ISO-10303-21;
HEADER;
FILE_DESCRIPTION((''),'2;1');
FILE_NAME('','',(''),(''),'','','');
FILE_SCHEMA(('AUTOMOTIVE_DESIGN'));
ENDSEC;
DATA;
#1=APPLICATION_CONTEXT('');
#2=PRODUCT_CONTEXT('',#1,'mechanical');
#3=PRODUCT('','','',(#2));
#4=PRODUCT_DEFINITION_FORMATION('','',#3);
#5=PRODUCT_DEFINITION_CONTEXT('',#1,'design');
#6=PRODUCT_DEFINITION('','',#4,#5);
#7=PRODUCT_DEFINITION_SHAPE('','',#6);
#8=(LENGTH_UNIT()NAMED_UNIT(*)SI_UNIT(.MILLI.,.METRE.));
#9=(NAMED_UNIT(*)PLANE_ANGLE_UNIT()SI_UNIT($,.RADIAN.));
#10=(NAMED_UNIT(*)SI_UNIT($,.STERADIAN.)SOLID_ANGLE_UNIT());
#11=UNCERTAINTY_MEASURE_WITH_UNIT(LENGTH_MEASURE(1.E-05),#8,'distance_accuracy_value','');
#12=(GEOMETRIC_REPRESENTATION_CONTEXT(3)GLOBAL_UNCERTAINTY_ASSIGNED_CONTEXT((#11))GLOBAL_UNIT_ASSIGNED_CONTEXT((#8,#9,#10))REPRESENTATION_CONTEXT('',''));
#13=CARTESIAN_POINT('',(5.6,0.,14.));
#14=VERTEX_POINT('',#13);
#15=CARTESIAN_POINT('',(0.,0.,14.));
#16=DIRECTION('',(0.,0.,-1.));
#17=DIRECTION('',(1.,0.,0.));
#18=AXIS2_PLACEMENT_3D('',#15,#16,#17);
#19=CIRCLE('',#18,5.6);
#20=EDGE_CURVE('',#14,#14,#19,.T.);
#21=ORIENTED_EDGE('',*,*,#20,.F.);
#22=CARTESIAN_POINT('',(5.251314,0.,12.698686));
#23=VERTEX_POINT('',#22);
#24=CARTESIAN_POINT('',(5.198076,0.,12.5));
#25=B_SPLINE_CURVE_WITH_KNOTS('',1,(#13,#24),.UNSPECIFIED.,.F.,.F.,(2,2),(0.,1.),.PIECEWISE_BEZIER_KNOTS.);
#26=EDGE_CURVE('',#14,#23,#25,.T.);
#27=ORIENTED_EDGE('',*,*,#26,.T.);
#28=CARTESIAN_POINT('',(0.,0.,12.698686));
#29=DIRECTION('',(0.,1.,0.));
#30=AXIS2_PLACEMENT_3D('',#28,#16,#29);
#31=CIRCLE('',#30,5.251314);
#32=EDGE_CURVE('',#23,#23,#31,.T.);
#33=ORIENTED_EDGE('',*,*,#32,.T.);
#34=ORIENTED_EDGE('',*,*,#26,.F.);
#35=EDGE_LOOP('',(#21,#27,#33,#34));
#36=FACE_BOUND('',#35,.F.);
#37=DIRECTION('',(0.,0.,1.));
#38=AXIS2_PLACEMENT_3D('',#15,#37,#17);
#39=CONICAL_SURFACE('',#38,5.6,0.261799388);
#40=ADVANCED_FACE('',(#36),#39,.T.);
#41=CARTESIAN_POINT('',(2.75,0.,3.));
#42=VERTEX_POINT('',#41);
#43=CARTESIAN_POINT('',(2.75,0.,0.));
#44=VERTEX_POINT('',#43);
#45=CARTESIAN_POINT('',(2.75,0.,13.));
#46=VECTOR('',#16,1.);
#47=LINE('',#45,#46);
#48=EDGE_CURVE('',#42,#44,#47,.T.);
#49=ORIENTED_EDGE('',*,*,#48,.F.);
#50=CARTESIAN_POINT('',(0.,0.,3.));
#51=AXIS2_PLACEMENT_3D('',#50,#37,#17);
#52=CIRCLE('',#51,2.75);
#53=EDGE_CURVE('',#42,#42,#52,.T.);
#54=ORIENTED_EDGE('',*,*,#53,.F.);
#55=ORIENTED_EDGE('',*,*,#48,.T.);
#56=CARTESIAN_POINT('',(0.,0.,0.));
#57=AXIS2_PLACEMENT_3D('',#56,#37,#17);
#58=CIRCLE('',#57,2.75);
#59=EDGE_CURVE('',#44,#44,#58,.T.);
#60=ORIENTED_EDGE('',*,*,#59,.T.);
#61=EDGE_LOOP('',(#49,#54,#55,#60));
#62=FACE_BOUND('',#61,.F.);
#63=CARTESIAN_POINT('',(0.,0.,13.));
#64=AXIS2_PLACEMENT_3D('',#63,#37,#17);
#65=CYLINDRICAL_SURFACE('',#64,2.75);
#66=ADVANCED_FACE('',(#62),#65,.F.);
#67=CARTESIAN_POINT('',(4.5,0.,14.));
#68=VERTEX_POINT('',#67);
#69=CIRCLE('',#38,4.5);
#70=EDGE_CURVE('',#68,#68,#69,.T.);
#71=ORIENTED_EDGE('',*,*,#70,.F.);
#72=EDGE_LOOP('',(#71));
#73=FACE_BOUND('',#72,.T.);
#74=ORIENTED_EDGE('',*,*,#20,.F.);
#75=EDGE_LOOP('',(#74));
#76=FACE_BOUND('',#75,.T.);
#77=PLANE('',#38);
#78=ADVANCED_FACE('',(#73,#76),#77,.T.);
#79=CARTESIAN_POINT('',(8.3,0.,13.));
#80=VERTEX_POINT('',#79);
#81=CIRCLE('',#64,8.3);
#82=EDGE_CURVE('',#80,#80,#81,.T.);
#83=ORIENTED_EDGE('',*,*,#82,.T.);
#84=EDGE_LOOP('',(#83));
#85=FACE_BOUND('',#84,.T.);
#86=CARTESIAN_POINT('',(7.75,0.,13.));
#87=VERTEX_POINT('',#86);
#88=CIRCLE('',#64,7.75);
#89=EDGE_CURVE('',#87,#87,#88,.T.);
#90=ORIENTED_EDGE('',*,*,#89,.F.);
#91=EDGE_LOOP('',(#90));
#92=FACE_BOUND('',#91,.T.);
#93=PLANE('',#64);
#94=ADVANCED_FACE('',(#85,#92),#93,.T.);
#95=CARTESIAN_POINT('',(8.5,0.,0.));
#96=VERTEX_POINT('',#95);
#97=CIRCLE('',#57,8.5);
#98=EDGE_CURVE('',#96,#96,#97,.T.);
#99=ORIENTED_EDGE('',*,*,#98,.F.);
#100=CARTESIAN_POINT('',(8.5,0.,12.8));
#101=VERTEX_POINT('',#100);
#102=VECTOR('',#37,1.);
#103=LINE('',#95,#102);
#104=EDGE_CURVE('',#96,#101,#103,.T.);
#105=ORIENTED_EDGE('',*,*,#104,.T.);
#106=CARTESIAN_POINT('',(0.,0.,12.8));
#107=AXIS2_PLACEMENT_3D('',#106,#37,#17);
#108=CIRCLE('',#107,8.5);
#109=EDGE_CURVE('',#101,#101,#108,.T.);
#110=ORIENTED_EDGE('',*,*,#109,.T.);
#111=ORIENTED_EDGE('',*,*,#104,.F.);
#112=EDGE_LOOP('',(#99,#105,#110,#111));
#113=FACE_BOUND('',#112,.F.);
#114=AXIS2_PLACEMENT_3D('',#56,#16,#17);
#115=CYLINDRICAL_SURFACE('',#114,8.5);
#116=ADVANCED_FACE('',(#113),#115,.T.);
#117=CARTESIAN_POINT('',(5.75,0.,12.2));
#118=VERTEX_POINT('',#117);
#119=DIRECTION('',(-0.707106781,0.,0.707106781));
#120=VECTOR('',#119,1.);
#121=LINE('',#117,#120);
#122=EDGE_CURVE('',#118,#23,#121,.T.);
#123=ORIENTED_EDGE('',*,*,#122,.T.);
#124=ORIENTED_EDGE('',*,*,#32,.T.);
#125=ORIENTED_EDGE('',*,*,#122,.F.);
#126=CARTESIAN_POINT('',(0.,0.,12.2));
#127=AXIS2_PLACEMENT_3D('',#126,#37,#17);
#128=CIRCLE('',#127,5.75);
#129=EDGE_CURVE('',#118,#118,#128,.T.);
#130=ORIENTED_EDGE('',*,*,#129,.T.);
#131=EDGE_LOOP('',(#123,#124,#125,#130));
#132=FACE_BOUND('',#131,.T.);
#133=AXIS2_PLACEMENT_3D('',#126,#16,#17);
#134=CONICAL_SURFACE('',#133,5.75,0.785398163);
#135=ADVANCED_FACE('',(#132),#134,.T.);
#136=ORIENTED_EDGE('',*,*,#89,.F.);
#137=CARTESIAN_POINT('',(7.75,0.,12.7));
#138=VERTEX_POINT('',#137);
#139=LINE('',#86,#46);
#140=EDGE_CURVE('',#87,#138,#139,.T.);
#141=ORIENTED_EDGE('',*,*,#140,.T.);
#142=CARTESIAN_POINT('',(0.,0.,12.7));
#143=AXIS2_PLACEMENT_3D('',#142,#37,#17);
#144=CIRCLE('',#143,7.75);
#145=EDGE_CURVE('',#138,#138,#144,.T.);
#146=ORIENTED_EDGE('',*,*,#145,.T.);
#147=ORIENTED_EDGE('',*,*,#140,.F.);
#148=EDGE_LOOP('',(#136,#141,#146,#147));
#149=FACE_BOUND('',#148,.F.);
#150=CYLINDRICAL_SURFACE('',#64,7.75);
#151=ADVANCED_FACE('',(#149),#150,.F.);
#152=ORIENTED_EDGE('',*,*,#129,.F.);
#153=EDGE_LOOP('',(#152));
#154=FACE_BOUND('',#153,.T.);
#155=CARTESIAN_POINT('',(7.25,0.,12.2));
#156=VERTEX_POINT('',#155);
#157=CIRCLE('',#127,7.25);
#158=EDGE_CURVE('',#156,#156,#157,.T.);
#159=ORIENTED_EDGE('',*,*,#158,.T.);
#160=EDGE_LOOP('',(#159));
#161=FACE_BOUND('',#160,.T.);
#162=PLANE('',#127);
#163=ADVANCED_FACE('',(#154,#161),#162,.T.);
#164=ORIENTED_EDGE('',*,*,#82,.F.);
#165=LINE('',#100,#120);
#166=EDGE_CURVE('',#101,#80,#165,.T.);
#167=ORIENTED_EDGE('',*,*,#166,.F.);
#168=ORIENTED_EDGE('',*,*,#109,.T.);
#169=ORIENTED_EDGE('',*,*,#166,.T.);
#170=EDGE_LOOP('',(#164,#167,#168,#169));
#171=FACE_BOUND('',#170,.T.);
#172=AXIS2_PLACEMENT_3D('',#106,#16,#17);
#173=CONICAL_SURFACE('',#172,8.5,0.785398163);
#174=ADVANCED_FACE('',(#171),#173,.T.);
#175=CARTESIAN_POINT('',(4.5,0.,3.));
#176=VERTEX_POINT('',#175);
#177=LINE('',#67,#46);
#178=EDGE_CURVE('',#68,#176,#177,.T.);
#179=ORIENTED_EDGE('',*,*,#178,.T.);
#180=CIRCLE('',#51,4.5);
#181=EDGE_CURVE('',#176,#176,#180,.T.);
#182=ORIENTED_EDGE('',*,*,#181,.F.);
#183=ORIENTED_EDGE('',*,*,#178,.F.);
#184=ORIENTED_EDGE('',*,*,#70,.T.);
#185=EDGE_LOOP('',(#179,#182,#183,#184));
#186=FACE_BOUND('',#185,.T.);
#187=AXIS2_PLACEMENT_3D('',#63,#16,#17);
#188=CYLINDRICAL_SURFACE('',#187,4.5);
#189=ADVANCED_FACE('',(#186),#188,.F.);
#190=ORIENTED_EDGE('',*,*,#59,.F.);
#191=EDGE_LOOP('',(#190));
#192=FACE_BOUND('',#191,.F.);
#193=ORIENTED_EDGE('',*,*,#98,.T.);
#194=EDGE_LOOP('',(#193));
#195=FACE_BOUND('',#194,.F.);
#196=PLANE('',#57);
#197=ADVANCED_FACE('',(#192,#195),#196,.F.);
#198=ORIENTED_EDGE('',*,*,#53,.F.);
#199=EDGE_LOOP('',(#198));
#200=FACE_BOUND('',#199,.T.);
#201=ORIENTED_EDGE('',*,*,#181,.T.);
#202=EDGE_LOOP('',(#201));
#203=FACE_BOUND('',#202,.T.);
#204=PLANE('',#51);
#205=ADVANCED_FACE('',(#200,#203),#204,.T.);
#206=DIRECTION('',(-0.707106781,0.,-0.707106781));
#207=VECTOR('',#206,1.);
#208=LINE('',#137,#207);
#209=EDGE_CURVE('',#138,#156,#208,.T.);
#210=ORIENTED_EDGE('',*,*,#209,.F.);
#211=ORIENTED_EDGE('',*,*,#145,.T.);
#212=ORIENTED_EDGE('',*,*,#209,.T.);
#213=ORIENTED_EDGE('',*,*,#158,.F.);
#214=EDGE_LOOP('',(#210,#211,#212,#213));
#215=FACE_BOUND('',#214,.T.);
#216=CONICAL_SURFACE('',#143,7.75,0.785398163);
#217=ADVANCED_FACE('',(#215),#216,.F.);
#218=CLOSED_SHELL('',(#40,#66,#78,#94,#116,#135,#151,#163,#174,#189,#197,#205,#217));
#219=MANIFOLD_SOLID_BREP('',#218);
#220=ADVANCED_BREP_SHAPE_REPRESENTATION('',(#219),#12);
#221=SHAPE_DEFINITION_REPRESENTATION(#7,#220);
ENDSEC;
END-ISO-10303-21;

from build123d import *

# Parameters (mm, degrees)
F0_R      = 8.5
F1_DEPTH  = 13
F2_R      = 2.75
F3_DEPTH  = 13.001
F4_R      = 4.5
F5_DEPTH  = 10
F6_SIZE   = 0.2
F7_R      = 7.75
F7_R_2    = 5.25
F8_DEPTH  = 0.8
F9_DEPTH  = 1
F10_R     = 5.6
F10_R_2   = 4.5
F11_DEPTH = 1.5
F11_TAPER = 15


# Not quite as in the source:
# - a fillet or chamfer that OpenCascade refuses, or shapes differently, is made with other operations: its cross-section is extruded or revolved along the edge and cut away or added
# - a feature names something its author has since deleted; it is built from what else it names


with BuildPart() as f1:
    # F0 (on Top) → F1 (new body)
    with BuildSketch(Plane.XY):
        Circle(F0_R)
    extrude(amount=F1_DEPTH)

    # F2 (on face) → F3 (cut, through all)
    with BuildSketch(Plane.XY.offset(13)):
        Circle(F2_R)
    extrude(amount=-F3_DEPTH, mode=Mode.SUBTRACT)

    # F4 (on face) → F5 (cut)
    with BuildSketch(Plane.XY.offset(13)):
        Circle(F4_R)
    extrude(amount=-F5_DEPTH, mode=Mode.SUBTRACT)

    # F6
    f6_edges = [f1.edges().sort_by_distance(p)[0] for p in [
        (-8.5, 0, 13),
    ]]
    chamfer(f6_edges, length=F6_SIZE)

    # F7 (on face) → F8 (cut)
    with BuildSketch(Plane.XY.offset(13)):
        Circle(F7_R)
        Circle(F7_R_2, mode=Mode.SUBTRACT)
    extrude(amount=-F8_DEPTH, mode=Mode.SUBTRACT)

    # F9 (add): a face of the model
    f9_faces = [f1.faces().sort_by_distance(p)[0] for p in [
        (-5.101507576, 0, 13),
    ]]
    extrude(f9_faces, amount=F9_DEPTH)

    # F10 (on face) → F11 (join)
    with BuildSketch(Plane.XY.offset(14)):
        Circle(F10_R)
        Circle(F10_R_2, mode=Mode.SUBTRACT)
    extrude(amount=-F11_DEPTH, taper=F11_TAPER)

    # F12: chamfer of 0.5 on 2 edges, made by hand

    # F12_s1 → F12_t2 (revolve)
    with BuildSketch(Plane.XZ):
        Polygon((7.75, 12.7), (7.25, 12.2), (7.75, 12.2), align=None)
    revolve(axis=Axis((0, 0, 12.2), (0, 0, 1)))

    # F12_s3 → F12_t4 (revolve)
    with BuildSketch(Plane.XZ):
        Polygon((5.75, 12.2), (5.25, 12.7), (5.25, 12.2), align=None)
    revolve(axis=Axis((0, 0, 12.2), (0, 0, 1)))


solid = f1.part
